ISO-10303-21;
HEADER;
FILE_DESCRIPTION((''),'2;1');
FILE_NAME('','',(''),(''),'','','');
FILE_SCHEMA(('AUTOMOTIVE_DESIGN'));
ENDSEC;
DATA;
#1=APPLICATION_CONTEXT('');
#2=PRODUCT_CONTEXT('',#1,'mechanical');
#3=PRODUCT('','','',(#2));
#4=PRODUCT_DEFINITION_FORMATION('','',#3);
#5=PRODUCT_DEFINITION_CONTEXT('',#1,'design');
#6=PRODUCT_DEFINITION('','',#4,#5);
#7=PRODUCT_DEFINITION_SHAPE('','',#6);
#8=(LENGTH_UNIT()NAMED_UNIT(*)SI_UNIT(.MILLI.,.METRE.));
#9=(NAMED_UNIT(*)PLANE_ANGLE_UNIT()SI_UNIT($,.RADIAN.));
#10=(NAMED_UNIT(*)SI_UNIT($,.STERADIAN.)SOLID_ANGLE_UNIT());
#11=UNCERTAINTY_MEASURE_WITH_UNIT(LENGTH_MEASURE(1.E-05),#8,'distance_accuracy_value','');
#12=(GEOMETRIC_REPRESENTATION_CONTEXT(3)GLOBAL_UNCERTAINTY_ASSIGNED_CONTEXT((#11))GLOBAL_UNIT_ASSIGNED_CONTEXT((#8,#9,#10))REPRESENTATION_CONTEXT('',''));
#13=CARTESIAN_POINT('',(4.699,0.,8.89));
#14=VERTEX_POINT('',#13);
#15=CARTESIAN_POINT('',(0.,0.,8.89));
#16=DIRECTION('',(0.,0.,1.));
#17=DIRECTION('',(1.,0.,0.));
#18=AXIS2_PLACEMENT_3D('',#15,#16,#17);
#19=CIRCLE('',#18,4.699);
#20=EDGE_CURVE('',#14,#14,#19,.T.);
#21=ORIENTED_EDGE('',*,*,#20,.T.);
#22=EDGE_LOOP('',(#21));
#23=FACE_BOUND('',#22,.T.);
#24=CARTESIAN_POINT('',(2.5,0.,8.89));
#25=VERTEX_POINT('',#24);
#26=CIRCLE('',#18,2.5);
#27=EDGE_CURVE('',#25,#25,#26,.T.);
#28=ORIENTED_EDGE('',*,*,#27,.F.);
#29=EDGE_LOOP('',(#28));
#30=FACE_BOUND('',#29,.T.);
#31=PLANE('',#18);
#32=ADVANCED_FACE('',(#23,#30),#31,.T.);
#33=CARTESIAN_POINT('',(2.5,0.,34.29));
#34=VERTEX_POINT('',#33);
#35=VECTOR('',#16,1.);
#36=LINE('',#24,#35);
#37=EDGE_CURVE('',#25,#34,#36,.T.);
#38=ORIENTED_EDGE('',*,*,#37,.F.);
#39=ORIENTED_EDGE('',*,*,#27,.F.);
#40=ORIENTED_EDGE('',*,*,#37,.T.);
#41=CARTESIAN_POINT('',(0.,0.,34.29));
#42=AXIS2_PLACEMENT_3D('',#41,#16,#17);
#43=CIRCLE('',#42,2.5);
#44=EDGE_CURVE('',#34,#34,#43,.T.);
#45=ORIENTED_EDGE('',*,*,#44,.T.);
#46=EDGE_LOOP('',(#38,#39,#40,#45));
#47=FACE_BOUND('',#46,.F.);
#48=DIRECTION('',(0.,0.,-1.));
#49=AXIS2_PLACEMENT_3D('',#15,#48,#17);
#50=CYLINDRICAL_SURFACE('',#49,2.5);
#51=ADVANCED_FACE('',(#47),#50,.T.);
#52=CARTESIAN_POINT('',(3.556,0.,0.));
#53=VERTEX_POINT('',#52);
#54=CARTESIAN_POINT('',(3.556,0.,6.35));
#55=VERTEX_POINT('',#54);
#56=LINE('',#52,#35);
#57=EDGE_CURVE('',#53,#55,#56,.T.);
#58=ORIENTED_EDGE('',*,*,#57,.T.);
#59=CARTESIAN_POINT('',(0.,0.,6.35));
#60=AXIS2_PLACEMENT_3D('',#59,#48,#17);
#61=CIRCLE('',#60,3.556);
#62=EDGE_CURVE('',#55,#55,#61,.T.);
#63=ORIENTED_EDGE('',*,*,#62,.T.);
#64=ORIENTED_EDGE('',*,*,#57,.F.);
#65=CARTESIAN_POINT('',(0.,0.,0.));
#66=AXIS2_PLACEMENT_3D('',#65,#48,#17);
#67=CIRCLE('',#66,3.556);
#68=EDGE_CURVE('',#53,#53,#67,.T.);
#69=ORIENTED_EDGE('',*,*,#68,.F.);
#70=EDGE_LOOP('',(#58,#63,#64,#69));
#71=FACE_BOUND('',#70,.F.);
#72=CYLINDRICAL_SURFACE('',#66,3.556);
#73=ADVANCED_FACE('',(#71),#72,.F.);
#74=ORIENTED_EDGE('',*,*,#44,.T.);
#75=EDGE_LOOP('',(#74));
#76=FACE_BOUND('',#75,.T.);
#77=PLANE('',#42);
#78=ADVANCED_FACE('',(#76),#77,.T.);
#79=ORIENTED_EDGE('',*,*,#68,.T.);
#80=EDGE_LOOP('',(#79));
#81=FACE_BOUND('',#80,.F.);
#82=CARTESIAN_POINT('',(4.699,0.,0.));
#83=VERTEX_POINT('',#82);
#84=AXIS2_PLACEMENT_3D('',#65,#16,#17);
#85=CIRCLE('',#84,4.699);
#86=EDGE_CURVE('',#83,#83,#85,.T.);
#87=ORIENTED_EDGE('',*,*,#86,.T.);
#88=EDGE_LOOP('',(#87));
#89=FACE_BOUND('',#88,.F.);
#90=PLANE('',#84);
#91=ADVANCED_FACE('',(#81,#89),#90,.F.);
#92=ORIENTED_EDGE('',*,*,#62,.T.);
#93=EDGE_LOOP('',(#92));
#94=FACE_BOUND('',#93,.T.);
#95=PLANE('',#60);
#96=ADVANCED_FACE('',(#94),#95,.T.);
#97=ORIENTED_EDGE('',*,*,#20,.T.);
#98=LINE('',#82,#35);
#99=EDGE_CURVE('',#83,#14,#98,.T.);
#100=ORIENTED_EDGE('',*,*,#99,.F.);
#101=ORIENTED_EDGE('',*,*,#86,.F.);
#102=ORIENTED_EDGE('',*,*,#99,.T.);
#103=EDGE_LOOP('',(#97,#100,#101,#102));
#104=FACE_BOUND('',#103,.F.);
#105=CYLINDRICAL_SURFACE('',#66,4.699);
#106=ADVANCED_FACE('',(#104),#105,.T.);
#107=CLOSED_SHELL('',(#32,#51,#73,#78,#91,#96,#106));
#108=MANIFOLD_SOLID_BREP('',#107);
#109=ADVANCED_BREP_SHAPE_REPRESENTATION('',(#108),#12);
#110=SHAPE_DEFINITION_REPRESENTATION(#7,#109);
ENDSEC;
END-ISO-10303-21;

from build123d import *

# Parameters (mm, degrees)
F0_R     = 4.699
F1_DEPTH = 8.89
F2_R     = 2.5
F3_DEPTH = 25.4
F4_R     = 3.556
F5_DEPTH = 6.35


# Not quite as in the source:
# - a feature names something its author has since deleted; it is built from what else it names


with BuildPart() as f1:
    # F0 (on Top) → F1 (new body)
    with BuildSketch(Plane.XY):
        Circle(F0_R)
    extrude(amount=F1_DEPTH)

    # F2 (on face) → F3 (join)
    with BuildSketch(Plane.XY.offset(8.89)):
        Circle(F2_R)
    extrude(amount=F3_DEPTH)

    # F4 (on face) → F5 (cut)
    with BuildSketch(Plane(origin=(0, 0, 0), x_dir=(1, 0, 0), z_dir=(0, 0, -1))):
        Circle(F4_R)
    extrude(amount=-F5_DEPTH, mode=Mode.SUBTRACT)


solid = f1.part
